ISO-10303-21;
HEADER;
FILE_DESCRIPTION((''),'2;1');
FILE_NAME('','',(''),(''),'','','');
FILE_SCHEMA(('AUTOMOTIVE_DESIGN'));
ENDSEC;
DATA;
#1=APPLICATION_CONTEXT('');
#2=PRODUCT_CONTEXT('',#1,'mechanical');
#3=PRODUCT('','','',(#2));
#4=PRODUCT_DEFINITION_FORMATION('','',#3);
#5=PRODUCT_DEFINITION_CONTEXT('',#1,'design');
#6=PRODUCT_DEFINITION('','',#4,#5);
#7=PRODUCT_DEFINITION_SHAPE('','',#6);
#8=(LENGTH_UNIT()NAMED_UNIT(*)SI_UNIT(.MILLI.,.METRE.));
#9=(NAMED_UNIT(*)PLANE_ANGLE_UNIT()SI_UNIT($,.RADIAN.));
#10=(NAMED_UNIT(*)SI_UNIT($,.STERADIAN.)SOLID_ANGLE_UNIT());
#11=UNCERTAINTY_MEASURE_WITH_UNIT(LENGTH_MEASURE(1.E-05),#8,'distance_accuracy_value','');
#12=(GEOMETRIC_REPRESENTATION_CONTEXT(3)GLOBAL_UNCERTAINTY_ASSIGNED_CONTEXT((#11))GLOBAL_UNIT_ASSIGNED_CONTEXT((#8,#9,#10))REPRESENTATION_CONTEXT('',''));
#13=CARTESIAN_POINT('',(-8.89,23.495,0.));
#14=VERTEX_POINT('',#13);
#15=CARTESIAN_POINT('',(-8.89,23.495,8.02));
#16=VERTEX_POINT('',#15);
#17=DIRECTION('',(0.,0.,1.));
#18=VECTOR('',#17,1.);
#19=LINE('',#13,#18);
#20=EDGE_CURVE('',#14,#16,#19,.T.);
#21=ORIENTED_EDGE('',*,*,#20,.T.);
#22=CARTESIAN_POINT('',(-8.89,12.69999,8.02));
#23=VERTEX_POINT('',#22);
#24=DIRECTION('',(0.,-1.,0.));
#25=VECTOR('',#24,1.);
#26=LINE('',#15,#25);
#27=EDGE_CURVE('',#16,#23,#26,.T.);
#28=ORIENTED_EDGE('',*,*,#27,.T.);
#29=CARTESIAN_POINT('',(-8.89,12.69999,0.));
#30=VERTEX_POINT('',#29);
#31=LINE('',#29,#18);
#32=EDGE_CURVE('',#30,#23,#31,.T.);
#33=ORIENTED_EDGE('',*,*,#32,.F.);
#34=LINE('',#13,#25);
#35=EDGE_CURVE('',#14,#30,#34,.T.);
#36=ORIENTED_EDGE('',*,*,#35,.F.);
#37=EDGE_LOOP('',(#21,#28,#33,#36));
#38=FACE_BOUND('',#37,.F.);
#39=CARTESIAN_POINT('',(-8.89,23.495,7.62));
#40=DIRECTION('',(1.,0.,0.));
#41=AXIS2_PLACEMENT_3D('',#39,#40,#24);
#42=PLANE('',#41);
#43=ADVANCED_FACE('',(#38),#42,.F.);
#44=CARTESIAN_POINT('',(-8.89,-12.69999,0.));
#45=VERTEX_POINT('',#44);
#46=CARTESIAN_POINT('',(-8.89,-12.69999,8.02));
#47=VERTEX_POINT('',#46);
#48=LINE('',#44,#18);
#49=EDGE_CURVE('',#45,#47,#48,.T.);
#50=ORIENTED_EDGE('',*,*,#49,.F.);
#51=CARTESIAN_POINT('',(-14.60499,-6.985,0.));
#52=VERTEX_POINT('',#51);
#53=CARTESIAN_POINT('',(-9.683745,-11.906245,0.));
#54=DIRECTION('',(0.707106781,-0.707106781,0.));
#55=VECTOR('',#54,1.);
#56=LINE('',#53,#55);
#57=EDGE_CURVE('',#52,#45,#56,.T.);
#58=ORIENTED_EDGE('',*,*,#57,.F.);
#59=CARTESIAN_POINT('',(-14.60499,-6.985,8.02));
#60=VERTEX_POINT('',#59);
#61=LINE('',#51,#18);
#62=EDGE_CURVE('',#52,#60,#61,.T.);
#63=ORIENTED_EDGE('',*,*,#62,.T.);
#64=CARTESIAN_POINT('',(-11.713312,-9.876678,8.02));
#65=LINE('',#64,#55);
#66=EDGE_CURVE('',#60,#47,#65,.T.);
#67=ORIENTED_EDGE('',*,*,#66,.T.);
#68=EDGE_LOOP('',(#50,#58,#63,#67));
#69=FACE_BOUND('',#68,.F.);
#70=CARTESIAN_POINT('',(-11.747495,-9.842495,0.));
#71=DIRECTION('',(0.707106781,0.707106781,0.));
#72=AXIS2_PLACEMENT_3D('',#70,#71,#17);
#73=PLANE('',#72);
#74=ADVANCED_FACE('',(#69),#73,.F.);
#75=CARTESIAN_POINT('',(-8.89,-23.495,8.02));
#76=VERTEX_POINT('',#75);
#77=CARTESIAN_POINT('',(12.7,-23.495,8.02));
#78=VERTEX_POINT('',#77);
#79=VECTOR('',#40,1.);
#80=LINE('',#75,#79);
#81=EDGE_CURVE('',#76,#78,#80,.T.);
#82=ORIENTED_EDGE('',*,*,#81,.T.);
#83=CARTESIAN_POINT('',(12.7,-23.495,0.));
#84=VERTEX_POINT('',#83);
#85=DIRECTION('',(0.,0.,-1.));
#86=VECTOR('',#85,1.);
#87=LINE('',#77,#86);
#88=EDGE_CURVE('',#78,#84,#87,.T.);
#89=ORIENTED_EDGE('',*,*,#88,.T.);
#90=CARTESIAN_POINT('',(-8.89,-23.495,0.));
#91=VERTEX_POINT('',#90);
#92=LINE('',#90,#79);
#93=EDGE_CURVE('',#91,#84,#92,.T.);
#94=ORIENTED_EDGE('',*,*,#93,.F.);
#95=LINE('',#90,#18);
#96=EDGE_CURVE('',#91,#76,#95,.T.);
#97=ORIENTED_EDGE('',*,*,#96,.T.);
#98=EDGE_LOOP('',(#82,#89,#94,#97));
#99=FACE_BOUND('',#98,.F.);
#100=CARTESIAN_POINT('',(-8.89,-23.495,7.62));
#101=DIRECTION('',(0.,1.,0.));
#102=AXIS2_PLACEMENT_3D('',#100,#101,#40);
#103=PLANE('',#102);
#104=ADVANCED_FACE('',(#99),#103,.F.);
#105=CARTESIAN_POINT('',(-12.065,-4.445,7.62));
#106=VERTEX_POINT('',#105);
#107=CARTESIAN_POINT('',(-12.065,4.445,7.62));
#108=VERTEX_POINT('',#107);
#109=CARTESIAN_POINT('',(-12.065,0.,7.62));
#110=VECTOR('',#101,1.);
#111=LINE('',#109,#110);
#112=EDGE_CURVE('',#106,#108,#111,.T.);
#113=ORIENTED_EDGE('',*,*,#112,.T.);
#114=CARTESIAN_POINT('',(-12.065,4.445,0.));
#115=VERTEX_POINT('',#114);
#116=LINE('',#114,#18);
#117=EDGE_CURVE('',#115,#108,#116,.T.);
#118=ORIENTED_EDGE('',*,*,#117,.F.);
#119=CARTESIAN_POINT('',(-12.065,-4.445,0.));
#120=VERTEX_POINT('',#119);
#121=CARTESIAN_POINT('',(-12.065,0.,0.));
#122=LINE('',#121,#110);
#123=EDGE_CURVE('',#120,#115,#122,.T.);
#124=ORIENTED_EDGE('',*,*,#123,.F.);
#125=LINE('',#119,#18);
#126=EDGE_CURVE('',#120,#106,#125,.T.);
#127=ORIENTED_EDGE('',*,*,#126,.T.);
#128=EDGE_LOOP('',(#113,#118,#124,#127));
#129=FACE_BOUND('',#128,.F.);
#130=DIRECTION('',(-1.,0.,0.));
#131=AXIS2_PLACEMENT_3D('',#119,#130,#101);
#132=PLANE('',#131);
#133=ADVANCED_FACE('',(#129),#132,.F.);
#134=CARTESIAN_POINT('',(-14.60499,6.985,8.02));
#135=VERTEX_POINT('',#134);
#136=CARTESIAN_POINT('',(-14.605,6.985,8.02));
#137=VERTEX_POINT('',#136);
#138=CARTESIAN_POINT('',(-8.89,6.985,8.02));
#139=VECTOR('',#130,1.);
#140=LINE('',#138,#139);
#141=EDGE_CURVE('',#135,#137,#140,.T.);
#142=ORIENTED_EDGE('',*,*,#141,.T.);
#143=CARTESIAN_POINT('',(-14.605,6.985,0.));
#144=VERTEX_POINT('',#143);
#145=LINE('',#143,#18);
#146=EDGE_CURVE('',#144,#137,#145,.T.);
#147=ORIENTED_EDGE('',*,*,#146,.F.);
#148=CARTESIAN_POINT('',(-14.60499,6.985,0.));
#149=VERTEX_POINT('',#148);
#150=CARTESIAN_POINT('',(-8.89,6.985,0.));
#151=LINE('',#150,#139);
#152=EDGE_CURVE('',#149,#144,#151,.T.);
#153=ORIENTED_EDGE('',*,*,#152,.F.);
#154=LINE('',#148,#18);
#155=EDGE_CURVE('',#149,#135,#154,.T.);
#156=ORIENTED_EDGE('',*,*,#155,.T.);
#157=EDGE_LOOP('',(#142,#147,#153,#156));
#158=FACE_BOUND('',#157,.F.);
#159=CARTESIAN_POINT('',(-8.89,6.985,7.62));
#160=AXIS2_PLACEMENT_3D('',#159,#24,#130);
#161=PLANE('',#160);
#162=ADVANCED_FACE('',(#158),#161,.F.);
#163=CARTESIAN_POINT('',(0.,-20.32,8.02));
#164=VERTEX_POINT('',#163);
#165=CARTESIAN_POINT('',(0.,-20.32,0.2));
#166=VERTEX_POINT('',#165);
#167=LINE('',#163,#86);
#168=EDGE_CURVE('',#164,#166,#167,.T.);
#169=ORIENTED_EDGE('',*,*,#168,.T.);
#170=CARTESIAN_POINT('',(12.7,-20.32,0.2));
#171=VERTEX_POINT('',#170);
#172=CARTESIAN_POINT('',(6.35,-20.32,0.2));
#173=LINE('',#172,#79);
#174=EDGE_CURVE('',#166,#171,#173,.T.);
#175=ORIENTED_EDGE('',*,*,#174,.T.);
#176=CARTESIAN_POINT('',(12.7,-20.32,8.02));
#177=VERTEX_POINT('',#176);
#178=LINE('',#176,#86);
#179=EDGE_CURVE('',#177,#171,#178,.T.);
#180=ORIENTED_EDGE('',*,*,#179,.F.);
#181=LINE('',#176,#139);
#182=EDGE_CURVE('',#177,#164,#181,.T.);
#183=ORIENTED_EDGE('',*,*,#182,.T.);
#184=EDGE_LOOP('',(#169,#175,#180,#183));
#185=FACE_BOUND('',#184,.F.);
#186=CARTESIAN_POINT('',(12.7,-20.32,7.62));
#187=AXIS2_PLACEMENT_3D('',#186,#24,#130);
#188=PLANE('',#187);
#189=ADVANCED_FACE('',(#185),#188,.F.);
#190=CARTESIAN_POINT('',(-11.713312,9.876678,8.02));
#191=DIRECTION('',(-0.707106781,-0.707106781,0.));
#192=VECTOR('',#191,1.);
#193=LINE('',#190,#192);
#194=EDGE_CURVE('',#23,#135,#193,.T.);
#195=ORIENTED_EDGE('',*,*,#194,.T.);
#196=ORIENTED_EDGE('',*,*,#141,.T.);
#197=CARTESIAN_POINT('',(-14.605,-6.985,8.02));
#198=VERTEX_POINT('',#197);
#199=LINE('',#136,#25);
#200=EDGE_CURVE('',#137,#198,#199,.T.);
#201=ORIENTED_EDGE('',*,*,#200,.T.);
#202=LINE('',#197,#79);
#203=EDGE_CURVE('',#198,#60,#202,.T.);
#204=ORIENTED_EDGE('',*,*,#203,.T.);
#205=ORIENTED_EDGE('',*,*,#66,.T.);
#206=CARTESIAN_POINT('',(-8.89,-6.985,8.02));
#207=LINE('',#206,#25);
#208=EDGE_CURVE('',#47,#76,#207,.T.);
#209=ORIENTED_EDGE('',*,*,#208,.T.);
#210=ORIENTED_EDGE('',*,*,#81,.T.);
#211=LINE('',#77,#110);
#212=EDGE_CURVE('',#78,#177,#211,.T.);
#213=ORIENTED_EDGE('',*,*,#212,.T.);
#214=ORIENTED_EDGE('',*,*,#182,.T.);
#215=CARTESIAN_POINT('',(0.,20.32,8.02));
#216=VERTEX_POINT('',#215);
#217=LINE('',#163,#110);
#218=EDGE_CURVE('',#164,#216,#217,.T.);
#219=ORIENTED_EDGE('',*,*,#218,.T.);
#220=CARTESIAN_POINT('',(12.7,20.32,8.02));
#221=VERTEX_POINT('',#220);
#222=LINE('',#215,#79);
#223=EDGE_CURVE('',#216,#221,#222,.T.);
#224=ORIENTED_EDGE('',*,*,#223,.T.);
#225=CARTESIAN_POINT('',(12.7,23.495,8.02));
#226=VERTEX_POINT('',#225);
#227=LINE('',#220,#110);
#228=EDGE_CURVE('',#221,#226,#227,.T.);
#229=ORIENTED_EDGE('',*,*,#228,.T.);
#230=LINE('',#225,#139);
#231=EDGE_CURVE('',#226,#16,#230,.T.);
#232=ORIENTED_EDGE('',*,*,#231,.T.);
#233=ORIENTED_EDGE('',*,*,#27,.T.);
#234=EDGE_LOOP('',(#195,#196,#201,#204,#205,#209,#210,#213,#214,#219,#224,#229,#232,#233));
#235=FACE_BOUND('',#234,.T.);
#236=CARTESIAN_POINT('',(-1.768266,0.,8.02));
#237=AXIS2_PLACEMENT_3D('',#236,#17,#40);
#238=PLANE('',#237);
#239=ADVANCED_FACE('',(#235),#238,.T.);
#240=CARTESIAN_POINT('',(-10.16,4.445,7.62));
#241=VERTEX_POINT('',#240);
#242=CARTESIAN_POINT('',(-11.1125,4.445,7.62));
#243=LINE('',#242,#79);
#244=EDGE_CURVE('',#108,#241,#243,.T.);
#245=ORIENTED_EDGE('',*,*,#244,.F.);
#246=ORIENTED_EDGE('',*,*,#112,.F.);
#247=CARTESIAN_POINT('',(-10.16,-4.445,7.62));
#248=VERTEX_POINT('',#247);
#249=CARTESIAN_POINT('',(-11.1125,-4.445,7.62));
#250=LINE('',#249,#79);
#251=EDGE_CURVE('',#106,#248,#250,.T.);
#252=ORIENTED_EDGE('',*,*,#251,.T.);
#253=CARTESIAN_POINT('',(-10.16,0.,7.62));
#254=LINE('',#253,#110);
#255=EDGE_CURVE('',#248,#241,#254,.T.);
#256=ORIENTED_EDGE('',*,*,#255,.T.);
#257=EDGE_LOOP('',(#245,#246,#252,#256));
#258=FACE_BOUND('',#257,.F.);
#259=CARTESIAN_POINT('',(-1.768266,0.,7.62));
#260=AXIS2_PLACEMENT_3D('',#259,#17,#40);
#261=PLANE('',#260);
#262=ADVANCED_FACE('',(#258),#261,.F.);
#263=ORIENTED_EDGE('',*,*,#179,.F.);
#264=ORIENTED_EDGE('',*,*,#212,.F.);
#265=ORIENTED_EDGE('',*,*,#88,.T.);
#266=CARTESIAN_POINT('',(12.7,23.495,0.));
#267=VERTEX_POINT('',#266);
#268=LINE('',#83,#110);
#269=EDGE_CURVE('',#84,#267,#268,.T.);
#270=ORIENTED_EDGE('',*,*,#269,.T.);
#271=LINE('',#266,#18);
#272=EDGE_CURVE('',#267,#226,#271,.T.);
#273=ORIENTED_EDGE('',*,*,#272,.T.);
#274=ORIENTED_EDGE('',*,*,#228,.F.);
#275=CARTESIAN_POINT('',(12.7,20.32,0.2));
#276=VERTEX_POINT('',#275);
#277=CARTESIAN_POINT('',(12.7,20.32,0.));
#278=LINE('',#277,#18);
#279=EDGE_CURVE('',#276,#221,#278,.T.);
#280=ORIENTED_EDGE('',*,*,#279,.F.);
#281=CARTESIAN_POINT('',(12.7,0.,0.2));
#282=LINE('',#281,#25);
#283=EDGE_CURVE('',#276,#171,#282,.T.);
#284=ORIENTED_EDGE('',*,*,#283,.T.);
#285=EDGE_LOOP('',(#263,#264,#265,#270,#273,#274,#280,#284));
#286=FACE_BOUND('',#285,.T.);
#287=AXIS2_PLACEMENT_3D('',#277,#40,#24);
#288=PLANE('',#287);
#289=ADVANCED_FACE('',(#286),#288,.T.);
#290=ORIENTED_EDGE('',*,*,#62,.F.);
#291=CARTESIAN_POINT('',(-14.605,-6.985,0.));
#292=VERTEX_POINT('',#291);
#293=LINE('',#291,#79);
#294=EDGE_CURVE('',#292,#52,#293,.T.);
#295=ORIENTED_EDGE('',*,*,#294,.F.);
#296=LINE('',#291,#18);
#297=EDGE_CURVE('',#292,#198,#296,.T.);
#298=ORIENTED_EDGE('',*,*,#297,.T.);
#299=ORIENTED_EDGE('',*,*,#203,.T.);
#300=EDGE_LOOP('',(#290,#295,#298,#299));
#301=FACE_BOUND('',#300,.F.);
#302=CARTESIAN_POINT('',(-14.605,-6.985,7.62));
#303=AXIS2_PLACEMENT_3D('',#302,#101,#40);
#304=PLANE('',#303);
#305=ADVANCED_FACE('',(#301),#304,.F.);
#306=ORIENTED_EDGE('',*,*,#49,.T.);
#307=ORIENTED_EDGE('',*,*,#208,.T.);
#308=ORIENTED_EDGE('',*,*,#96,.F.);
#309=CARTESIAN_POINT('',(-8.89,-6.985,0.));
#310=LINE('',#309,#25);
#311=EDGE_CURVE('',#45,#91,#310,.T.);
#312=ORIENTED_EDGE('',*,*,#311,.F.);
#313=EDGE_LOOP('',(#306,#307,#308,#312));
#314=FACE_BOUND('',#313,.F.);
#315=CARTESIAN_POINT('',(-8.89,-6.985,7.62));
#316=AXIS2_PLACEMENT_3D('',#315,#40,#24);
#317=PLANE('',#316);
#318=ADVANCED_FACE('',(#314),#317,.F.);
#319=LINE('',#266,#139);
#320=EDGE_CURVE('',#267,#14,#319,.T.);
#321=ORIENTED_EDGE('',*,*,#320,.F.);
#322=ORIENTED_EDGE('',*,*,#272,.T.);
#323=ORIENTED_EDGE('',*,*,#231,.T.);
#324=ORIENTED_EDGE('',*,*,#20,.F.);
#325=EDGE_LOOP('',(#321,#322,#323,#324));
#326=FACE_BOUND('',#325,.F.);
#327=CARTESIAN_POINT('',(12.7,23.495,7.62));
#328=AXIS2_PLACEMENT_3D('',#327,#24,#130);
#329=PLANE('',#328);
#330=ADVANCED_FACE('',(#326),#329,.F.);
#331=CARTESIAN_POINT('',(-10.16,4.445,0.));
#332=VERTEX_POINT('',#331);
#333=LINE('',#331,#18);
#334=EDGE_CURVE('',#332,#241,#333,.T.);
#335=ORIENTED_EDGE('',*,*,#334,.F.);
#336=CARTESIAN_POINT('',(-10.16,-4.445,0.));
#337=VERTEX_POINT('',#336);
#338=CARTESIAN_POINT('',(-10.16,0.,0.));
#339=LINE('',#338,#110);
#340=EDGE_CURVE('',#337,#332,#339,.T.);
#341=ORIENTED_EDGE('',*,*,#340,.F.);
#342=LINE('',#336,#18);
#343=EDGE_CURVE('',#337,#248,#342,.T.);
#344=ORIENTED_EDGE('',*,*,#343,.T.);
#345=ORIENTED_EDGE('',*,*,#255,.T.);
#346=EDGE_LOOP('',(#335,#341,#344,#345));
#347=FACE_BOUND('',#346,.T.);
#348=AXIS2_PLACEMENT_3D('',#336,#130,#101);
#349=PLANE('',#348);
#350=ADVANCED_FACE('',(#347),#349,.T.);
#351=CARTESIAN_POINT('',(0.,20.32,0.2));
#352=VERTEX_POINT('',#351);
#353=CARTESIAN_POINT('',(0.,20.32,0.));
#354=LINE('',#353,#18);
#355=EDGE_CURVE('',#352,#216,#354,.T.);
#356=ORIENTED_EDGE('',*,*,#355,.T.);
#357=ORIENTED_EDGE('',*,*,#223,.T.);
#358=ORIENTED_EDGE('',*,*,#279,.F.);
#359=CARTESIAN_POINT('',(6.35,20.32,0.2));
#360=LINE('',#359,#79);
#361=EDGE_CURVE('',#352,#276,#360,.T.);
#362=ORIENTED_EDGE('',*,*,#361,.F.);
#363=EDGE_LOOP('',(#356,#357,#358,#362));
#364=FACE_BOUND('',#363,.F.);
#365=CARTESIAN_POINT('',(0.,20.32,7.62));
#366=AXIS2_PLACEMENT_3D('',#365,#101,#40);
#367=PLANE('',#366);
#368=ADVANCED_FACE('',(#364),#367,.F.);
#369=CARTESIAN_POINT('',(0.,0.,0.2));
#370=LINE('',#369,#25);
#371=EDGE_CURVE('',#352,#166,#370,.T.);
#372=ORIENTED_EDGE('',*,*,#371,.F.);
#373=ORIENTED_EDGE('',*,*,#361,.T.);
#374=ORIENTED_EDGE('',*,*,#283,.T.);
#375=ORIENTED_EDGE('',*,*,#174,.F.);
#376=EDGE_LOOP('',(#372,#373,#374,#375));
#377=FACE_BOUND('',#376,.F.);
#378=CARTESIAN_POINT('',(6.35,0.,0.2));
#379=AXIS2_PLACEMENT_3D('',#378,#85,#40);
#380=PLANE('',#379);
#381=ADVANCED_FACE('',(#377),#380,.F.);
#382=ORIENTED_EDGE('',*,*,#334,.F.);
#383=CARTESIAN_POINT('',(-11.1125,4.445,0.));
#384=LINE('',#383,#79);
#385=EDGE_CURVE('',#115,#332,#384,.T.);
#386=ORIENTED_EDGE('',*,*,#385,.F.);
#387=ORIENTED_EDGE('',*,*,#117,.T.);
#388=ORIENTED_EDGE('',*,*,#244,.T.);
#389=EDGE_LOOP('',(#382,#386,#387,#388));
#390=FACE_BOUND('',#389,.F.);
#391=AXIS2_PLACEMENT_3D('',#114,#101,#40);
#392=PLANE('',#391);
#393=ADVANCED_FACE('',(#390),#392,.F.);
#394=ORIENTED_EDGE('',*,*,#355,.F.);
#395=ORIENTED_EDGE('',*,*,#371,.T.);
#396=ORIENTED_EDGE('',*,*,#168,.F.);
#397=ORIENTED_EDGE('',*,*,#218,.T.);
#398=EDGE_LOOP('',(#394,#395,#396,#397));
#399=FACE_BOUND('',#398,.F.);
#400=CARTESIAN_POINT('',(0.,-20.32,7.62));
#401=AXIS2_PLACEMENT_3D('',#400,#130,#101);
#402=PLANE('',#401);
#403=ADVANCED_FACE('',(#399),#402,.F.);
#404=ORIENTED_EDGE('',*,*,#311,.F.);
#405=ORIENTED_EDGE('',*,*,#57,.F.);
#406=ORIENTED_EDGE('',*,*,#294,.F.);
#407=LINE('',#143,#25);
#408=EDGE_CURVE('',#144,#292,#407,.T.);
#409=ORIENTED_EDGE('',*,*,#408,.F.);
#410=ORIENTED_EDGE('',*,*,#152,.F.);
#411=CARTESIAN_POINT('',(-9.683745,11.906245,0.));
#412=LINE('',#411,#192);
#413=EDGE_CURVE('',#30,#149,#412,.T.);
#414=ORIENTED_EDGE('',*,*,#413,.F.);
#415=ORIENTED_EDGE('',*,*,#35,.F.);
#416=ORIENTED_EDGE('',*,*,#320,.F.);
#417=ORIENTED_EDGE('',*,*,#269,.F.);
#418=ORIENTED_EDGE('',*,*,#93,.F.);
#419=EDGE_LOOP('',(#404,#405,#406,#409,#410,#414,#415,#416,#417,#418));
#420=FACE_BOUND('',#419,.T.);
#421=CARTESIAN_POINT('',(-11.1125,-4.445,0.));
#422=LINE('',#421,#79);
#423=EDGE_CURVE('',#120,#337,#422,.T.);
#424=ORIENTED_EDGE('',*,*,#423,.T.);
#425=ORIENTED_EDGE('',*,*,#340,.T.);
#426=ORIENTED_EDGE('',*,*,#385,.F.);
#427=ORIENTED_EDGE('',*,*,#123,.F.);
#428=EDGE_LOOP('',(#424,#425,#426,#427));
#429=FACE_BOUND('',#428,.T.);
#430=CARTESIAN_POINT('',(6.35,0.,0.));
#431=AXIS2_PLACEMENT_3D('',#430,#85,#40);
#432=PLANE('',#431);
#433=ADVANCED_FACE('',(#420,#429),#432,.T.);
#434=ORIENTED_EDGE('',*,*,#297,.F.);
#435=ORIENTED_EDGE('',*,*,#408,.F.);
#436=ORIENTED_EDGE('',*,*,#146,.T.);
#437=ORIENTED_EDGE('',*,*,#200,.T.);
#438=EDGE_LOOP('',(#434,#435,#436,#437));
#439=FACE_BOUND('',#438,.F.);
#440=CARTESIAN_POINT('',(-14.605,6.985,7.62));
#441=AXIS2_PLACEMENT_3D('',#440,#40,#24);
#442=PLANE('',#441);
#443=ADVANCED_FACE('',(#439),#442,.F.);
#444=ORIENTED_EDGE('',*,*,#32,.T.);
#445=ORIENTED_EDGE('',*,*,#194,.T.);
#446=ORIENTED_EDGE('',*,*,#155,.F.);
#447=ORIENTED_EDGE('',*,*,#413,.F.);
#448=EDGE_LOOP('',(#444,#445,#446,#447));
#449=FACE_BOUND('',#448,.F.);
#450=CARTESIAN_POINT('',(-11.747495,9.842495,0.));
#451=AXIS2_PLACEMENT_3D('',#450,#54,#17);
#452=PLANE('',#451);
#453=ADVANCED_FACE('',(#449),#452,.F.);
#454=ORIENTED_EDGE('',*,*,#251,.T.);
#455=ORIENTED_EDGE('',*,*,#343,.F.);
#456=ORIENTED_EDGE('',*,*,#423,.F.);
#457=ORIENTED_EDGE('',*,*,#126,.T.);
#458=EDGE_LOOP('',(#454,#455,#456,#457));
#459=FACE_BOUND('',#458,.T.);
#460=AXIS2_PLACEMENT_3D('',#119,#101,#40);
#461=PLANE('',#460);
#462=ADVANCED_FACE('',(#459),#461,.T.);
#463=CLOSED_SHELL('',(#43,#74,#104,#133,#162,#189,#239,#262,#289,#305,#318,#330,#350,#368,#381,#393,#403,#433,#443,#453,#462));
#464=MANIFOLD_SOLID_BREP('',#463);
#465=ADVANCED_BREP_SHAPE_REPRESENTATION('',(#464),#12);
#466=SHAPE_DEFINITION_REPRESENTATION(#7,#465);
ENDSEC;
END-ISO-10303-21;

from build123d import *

# Parameters (mm, degrees)
F0_W     = 1.905
F0_H     = 8.89
F1_DEPTH = 7.62
F3_DEPTH = 0.4
F4_W     = 12.7
F4_H     = 40.64
F5_DEPTH = 0.2
F6_SIZE  = 5.71499


# Not quite as in the source:
# - a fillet or chamfer is up to 0.001 mm smaller than in the source, because OpenCascade refuses the exact size


with BuildPart() as f1:
    # F0 (on Top) → F1 (new body)
    with BuildSketch(Plane.XY):
        Polygon((-14.605, 6.985), (-14.605, 0), (-14.605, -6.985), (-8.89, -6.985), (-8.89, -23.495), (12.7, -23.495), (12.7, -20.32), (0, -20.32), (0, 0), (0, 20.32), (12.7, 20.32), (12.7, 23.495), (-8.89, 23.495), (-8.89, 6.985), align=None)
        with Locations((-11.1125, 0)):
            Rectangle(F0_W, F0_H, mode=Mode.SUBTRACT)
    extrude(amount=F1_DEPTH)

    # F2 (on face) → F3 (join)
    with BuildSketch(Plane.XY.offset(7.62)):
        Polygon((0, -20.32), (0, 20.32), (12.7, 20.32), (12.7, 23.495), (-8.89, 23.495), (-8.89, 6.985), (-14.605, 6.985), (-14.605, -6.985), (-8.89, -6.985), (-8.89, -23.495), (12.7, -23.495), (12.7, -20.32), align=None)
    extrude(amount=F3_DEPTH)

    # F4 (on face) → F5 (join)
    with BuildSketch(Plane(origin=(0, 0, 0), x_dir=(1, 0, 0), z_dir=(0, 0, -1))):
        with Locations((6.35, 0)):
            Rectangle(F4_W, F4_H)
    extrude(amount=-F5_DEPTH)

    # F6 (size 5.715 in the source; OpenCascade refuses exactly that, so slightly less here)
    f6_edges = [f1.edges().sort_by_distance(p)[0] for p in [
        (-8.89, 6.985, 4.01),
        (-8.89, -6.985, 4.01),
    ]]
    chamfer(f6_edges, length=F6_SIZE)


solid = f1.part
